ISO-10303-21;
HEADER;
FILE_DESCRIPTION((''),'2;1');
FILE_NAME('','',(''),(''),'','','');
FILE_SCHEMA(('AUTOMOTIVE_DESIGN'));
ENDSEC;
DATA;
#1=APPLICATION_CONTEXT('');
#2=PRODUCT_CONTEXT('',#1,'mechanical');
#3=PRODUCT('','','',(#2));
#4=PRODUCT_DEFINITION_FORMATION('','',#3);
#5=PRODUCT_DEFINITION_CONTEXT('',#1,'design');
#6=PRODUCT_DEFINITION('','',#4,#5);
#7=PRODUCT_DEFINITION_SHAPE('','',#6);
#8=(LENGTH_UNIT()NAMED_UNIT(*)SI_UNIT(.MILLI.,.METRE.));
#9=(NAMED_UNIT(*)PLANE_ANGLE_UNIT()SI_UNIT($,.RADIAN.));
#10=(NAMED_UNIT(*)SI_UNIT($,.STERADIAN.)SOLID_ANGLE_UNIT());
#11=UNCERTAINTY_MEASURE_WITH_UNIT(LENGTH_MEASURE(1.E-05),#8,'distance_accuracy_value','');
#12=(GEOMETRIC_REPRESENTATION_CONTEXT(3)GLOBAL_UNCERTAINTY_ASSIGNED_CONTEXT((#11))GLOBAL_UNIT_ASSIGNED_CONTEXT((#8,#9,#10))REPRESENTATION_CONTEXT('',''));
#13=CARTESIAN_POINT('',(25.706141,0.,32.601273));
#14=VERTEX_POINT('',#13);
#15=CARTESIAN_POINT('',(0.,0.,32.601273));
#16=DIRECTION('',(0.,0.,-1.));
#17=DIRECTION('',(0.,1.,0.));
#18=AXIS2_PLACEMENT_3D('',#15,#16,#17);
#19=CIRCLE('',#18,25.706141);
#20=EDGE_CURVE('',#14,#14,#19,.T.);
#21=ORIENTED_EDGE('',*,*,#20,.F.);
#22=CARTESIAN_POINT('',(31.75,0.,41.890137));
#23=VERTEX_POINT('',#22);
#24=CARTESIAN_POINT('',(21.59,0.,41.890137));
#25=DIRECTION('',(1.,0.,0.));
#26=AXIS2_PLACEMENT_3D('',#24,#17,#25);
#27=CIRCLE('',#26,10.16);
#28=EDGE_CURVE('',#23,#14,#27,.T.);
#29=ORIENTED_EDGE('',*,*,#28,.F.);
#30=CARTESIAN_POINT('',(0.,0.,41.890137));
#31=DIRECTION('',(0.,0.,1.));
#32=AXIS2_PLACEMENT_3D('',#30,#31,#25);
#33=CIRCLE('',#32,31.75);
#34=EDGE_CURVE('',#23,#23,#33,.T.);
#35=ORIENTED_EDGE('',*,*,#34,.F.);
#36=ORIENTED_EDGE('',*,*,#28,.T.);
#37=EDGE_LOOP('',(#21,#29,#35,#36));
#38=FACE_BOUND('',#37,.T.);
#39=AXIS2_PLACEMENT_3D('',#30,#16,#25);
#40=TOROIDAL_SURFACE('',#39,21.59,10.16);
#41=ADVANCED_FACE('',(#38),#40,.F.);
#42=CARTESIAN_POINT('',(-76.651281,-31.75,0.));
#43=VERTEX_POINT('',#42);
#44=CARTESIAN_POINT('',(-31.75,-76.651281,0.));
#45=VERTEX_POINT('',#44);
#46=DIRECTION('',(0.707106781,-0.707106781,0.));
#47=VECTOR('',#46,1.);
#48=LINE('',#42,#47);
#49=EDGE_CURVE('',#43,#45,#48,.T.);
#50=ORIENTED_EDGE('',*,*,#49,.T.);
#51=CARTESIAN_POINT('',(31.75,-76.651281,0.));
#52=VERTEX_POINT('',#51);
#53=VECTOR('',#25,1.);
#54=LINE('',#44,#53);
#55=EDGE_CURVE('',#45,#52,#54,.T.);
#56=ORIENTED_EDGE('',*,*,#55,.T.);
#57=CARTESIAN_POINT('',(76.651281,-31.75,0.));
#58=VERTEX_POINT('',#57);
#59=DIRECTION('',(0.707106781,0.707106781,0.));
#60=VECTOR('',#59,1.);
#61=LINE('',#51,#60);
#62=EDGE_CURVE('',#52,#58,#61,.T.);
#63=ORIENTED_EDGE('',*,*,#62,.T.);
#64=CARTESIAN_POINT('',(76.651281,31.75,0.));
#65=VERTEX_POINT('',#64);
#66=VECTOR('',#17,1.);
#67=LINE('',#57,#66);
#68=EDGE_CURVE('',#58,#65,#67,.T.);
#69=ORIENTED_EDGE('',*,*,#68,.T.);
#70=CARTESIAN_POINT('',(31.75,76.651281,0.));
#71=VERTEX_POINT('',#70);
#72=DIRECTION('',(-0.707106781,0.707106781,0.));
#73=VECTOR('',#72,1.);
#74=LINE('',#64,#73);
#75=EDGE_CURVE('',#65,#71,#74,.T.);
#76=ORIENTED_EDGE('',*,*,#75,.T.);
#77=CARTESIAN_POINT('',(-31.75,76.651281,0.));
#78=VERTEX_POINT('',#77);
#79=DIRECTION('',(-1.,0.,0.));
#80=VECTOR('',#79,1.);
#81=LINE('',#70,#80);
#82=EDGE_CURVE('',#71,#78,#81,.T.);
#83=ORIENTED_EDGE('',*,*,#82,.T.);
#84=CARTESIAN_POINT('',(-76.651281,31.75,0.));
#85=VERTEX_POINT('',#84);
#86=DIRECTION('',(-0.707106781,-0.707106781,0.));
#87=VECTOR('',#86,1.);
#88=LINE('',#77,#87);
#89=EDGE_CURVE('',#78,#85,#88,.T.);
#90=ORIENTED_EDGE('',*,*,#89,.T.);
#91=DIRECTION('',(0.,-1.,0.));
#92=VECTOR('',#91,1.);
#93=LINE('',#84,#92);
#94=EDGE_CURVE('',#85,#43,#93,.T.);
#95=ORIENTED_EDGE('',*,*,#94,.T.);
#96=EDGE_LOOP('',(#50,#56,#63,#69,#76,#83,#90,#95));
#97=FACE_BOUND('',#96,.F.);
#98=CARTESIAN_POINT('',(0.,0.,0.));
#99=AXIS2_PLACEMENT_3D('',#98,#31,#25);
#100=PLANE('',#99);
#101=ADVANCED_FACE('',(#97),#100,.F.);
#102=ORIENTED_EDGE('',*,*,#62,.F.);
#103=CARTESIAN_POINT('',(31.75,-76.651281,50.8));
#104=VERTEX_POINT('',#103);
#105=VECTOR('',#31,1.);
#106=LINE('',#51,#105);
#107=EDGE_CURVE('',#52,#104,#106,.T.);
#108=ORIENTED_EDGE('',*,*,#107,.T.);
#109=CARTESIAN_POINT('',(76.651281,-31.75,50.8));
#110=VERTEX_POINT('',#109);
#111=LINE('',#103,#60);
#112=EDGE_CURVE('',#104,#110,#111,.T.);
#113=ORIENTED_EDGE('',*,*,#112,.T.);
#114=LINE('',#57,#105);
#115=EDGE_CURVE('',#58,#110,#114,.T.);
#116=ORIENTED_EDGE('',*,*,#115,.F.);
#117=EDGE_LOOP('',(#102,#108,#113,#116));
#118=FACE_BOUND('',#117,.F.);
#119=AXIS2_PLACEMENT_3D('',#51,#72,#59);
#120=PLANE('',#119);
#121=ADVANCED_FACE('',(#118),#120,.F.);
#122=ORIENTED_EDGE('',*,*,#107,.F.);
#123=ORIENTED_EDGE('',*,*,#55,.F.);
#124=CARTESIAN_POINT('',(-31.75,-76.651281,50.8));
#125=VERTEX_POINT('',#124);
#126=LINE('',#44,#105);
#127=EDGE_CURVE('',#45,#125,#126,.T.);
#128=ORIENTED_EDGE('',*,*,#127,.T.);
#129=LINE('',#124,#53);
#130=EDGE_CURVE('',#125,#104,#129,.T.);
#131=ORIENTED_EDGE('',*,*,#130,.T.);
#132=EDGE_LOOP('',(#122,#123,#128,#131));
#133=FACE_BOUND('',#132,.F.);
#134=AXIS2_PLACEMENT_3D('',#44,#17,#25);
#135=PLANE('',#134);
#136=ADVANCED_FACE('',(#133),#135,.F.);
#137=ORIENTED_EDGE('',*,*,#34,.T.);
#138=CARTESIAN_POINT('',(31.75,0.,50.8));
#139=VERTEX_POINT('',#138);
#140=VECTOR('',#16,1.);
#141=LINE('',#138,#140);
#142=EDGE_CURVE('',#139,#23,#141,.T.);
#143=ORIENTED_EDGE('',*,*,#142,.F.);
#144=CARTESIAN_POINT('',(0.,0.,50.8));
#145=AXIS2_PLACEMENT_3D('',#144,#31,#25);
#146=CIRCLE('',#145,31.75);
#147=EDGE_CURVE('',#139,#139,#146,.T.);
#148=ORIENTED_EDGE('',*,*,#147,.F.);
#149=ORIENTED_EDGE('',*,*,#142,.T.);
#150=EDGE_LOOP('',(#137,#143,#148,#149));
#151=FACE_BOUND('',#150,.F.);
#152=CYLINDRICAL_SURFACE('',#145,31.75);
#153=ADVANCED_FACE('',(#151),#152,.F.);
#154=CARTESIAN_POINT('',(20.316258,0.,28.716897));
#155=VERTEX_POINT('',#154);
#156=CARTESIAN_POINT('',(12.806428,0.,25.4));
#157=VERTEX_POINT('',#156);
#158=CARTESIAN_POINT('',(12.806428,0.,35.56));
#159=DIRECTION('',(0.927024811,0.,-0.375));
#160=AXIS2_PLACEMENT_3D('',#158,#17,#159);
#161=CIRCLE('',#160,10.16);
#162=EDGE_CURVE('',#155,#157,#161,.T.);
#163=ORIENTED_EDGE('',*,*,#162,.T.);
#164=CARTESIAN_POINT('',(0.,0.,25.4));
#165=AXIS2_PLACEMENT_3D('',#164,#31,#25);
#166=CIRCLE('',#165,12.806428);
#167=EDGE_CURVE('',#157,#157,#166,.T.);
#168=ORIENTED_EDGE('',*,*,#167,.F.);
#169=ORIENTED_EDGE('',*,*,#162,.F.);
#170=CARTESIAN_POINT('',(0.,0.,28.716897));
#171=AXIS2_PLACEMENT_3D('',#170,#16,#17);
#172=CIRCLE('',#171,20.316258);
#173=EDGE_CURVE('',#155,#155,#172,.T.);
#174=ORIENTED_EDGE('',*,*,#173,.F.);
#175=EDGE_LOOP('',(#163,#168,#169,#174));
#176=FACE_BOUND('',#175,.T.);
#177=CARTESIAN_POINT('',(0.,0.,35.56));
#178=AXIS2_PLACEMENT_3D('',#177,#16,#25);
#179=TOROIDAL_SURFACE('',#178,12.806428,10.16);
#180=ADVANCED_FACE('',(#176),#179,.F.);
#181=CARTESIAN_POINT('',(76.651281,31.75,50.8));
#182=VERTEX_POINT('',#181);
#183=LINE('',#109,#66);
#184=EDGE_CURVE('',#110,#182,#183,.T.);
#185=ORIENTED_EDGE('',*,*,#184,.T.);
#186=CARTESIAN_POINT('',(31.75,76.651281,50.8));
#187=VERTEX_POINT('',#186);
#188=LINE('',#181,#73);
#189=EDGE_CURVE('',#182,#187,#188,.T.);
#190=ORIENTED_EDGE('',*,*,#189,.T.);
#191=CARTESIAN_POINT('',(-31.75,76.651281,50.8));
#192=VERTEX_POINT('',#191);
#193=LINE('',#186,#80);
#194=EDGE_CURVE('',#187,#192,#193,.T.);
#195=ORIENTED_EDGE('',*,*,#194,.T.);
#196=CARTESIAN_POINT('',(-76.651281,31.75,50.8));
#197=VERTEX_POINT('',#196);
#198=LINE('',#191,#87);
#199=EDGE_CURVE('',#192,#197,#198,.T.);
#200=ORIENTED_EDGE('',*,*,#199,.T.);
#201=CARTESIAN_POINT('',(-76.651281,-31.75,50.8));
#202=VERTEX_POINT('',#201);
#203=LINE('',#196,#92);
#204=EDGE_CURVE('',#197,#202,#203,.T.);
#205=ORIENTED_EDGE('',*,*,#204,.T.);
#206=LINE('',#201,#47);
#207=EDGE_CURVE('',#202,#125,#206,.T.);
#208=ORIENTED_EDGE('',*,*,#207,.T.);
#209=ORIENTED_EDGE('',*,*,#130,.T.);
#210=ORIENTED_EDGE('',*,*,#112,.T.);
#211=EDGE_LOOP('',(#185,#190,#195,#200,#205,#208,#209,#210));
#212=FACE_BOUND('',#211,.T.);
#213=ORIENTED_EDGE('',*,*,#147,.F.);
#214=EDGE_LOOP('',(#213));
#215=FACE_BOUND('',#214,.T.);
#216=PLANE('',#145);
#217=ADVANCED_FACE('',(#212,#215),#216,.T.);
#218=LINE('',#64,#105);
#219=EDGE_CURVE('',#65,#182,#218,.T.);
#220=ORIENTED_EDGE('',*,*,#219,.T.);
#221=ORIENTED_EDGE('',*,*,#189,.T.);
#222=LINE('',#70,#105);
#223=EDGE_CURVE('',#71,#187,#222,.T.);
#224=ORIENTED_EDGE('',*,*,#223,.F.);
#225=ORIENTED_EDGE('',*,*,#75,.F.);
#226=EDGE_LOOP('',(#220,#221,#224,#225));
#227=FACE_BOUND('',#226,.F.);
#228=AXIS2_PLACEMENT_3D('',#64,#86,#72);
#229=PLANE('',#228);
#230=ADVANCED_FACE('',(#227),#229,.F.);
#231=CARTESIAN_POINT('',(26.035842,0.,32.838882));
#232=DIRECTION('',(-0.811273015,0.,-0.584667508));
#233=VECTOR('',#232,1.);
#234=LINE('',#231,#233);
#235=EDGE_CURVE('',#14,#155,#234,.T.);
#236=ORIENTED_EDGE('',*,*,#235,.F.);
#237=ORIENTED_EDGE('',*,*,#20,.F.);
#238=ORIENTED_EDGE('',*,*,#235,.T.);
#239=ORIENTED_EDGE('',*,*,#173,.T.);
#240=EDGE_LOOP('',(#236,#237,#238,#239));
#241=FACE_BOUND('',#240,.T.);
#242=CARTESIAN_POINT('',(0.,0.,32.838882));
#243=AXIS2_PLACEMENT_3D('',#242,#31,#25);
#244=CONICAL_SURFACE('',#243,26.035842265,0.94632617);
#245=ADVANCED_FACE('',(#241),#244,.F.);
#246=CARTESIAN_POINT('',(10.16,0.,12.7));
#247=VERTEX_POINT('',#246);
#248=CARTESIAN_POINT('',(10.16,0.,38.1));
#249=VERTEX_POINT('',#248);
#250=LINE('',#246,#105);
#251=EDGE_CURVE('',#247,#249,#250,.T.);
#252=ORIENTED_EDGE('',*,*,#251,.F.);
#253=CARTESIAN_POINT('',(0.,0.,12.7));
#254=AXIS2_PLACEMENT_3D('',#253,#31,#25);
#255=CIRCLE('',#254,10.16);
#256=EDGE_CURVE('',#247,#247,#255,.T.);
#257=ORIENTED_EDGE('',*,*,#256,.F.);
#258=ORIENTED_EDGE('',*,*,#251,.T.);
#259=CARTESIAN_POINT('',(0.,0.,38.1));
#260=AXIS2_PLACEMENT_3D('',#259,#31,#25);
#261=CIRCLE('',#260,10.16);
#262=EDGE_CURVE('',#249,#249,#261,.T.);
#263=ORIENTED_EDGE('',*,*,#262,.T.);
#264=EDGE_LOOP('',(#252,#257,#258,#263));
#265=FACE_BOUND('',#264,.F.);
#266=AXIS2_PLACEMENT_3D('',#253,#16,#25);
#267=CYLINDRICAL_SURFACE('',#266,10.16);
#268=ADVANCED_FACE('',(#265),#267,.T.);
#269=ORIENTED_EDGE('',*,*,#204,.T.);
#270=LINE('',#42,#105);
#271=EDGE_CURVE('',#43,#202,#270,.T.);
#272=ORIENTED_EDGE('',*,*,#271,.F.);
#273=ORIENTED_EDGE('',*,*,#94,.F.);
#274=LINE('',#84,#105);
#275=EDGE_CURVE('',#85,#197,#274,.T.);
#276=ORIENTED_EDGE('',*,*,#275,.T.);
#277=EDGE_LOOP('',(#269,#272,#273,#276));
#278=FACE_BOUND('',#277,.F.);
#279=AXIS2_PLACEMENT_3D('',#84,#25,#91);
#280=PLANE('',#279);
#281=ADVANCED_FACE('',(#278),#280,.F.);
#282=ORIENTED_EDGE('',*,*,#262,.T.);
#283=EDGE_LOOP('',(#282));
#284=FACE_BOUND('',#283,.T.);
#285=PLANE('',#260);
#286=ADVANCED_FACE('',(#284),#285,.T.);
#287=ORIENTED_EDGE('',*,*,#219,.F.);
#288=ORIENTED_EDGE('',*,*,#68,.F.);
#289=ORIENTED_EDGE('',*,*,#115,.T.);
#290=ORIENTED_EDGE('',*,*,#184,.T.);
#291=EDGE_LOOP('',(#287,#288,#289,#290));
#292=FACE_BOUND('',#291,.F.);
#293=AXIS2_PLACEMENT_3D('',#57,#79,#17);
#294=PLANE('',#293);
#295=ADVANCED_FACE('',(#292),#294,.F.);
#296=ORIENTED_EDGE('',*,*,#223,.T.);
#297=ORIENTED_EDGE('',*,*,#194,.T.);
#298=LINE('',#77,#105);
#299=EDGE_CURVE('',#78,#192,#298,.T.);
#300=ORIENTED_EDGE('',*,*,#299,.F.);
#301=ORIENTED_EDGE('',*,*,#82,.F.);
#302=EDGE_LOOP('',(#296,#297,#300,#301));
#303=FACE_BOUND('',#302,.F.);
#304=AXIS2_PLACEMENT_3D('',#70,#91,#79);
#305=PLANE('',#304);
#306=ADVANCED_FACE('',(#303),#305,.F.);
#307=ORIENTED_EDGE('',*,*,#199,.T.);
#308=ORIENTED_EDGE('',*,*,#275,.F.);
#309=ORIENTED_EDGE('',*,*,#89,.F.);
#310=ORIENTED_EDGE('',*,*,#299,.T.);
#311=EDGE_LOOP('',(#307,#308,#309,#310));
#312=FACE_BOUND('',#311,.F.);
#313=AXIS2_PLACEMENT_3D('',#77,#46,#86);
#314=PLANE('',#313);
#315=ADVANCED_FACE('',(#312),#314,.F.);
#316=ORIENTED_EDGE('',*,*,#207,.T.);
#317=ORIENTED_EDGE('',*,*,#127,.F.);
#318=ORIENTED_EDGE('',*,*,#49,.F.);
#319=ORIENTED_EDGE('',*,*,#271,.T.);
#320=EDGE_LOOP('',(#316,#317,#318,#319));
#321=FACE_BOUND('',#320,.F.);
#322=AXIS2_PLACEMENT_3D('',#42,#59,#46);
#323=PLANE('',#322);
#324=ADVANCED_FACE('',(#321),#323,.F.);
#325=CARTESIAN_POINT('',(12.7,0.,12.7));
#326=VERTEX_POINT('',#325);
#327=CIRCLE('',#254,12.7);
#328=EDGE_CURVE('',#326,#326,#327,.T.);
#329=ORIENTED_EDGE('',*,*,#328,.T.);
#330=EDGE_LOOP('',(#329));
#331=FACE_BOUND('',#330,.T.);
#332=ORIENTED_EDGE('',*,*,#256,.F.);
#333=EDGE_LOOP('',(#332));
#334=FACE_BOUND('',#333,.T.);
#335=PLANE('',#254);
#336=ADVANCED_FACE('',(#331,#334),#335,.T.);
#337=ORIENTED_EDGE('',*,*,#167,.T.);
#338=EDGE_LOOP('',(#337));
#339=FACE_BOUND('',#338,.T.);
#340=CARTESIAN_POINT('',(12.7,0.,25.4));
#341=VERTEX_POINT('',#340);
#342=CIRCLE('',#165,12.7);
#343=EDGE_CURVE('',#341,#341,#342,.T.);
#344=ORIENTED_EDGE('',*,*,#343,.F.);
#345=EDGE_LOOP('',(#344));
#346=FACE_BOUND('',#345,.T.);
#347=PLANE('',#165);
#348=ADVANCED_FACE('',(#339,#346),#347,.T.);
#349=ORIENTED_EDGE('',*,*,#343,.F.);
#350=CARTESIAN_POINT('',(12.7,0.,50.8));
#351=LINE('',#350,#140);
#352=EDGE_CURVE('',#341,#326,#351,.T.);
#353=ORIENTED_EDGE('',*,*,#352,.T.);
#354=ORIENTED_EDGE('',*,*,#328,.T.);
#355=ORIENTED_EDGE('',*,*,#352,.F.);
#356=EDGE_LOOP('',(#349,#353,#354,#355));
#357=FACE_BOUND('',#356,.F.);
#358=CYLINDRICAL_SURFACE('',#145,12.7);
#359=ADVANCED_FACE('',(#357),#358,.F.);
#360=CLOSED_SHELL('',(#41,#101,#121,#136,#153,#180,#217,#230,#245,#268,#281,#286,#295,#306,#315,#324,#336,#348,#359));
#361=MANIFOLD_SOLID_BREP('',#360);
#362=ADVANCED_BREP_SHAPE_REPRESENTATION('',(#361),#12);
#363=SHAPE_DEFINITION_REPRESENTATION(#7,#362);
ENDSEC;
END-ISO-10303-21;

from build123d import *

# Parameters (mm, degrees)
F1_DEPTH  = 50.8
F2_R      = 31.75
F3_DEPTH  = 19.05
F4_R      = 12.7
F5_DEPTH  = 38.1
F6_R      = 22.225
F7_DEPTH  = 25.4
F11_R     = 10.16
F12_DEPTH = 25.4


# Not quite as in the source:
# - a fillet or chamfer that OpenCascade refuses, or shapes differently, is made with other operations: its cross-section is extruded or revolved along the edge and cut away or added


with BuildPart() as f1:
    # F0 (on Top) → F1 (new body)
    with BuildSketch(Plane.XY):
        Polygon((76.6512806053, -31.75), (76.6512806053, 31.75), (31.75, 76.6512806053), (-31.75, 76.6512806053), (-76.6512806053, 31.75), (-76.6512806053, -31.75), (-31.75, -76.6512806053), (31.75, -76.6512806053), align=None)
    extrude(amount=F1_DEPTH)

    # F2 (on face) → F3 (cut)
    with BuildSketch(Plane.XY.offset(50.8)):
        Circle(F2_R)
    extrude(amount=-F3_DEPTH, mode=Mode.SUBTRACT)

    # F4 (on face) → F5 (cut)
    with BuildSketch(Plane.XY.offset(50.8)):
        Circle(F4_R)
    extrude(amount=-F5_DEPTH, mode=Mode.SUBTRACT)

    # F6 (on face) → F7 (cut)
    with BuildSketch(Plane.XY.offset(50.8)):
        Circle(F6_R)
    extrude(amount=-F7_DEPTH, mode=Mode.SUBTRACT)

    # F8: fillet of radius 10.16 on 1 edges, made by hand

    # F8_s1 → F8_t2 (revolve)
    with BuildSketch(Plane.XZ):
        with BuildLine():
            ThreePointArc((31.75, 41.8901368334), (28.9953089065, 34.9340603531), (22.225, 31.75))
            Line((22.225, 31.75), (31.75, 31.75))
            Line((31.75, 31.75), (31.75, 41.8901368334))
        make_face()
    revolve(axis=Axis((0, 0, 31.75), (0, 0, 1)))

    # F9: fillet of radius 10.16 on 1 edges, made by hand

    # F9_s1 → F9_t2 (revolve)
    with BuildSketch(Plane.XZ):
        with BuildLine():
            ThreePointArc((22.225, 31.75), (18.4860405842, 27.1357730325), (12.8064279214, 25.4))
            Line((12.8064279214, 25.4), (22.225, 25.4))
            Line((22.225, 25.4), (22.225, 31.75))
        make_face()
    revolve(axis=Axis((0, 0, 25.4), (0, 0, 1)))

    # F10: chamfer of 10.16 on 1 edges, made by hand

    # F10_s1 → F10_t2 (revolve, cut)
    with BuildSketch(Plane.XZ):
        with BuildLine():
            Line((26.0358422648, 32.838882269), (19.9865565056, 28.4792884435))
            Line((19.9865565056, 28.4792884435), (19.8363599068, 28.6161504971))
            ThreePointArc((19.8363599068, 28.6161504971), (21.1312925718, 30.0979038097), (22.0366285584, 31.8262))
            Line((22.0366285584, 31.8262), (22.2123, 31.9528027367))
            ThreePointArc((22.2123, 31.9528027367), (24.1382310347, 32.2649415193), (25.9535194466, 33.0246595378))
            Line((25.9535194466, 33.0246595378), (26.0358422648, 32.838882269))
        make_face()
    revolve(axis=Axis((0, 0, 31.75), (0, 0, 1)), mode=Mode.SUBTRACT)

    # F11 (on face) → F12 (join)
    with BuildSketch(Plane.XY.offset(12.7)):
        Circle(F11_R)
    extrude(amount=F12_DEPTH)


solid = f1.part
